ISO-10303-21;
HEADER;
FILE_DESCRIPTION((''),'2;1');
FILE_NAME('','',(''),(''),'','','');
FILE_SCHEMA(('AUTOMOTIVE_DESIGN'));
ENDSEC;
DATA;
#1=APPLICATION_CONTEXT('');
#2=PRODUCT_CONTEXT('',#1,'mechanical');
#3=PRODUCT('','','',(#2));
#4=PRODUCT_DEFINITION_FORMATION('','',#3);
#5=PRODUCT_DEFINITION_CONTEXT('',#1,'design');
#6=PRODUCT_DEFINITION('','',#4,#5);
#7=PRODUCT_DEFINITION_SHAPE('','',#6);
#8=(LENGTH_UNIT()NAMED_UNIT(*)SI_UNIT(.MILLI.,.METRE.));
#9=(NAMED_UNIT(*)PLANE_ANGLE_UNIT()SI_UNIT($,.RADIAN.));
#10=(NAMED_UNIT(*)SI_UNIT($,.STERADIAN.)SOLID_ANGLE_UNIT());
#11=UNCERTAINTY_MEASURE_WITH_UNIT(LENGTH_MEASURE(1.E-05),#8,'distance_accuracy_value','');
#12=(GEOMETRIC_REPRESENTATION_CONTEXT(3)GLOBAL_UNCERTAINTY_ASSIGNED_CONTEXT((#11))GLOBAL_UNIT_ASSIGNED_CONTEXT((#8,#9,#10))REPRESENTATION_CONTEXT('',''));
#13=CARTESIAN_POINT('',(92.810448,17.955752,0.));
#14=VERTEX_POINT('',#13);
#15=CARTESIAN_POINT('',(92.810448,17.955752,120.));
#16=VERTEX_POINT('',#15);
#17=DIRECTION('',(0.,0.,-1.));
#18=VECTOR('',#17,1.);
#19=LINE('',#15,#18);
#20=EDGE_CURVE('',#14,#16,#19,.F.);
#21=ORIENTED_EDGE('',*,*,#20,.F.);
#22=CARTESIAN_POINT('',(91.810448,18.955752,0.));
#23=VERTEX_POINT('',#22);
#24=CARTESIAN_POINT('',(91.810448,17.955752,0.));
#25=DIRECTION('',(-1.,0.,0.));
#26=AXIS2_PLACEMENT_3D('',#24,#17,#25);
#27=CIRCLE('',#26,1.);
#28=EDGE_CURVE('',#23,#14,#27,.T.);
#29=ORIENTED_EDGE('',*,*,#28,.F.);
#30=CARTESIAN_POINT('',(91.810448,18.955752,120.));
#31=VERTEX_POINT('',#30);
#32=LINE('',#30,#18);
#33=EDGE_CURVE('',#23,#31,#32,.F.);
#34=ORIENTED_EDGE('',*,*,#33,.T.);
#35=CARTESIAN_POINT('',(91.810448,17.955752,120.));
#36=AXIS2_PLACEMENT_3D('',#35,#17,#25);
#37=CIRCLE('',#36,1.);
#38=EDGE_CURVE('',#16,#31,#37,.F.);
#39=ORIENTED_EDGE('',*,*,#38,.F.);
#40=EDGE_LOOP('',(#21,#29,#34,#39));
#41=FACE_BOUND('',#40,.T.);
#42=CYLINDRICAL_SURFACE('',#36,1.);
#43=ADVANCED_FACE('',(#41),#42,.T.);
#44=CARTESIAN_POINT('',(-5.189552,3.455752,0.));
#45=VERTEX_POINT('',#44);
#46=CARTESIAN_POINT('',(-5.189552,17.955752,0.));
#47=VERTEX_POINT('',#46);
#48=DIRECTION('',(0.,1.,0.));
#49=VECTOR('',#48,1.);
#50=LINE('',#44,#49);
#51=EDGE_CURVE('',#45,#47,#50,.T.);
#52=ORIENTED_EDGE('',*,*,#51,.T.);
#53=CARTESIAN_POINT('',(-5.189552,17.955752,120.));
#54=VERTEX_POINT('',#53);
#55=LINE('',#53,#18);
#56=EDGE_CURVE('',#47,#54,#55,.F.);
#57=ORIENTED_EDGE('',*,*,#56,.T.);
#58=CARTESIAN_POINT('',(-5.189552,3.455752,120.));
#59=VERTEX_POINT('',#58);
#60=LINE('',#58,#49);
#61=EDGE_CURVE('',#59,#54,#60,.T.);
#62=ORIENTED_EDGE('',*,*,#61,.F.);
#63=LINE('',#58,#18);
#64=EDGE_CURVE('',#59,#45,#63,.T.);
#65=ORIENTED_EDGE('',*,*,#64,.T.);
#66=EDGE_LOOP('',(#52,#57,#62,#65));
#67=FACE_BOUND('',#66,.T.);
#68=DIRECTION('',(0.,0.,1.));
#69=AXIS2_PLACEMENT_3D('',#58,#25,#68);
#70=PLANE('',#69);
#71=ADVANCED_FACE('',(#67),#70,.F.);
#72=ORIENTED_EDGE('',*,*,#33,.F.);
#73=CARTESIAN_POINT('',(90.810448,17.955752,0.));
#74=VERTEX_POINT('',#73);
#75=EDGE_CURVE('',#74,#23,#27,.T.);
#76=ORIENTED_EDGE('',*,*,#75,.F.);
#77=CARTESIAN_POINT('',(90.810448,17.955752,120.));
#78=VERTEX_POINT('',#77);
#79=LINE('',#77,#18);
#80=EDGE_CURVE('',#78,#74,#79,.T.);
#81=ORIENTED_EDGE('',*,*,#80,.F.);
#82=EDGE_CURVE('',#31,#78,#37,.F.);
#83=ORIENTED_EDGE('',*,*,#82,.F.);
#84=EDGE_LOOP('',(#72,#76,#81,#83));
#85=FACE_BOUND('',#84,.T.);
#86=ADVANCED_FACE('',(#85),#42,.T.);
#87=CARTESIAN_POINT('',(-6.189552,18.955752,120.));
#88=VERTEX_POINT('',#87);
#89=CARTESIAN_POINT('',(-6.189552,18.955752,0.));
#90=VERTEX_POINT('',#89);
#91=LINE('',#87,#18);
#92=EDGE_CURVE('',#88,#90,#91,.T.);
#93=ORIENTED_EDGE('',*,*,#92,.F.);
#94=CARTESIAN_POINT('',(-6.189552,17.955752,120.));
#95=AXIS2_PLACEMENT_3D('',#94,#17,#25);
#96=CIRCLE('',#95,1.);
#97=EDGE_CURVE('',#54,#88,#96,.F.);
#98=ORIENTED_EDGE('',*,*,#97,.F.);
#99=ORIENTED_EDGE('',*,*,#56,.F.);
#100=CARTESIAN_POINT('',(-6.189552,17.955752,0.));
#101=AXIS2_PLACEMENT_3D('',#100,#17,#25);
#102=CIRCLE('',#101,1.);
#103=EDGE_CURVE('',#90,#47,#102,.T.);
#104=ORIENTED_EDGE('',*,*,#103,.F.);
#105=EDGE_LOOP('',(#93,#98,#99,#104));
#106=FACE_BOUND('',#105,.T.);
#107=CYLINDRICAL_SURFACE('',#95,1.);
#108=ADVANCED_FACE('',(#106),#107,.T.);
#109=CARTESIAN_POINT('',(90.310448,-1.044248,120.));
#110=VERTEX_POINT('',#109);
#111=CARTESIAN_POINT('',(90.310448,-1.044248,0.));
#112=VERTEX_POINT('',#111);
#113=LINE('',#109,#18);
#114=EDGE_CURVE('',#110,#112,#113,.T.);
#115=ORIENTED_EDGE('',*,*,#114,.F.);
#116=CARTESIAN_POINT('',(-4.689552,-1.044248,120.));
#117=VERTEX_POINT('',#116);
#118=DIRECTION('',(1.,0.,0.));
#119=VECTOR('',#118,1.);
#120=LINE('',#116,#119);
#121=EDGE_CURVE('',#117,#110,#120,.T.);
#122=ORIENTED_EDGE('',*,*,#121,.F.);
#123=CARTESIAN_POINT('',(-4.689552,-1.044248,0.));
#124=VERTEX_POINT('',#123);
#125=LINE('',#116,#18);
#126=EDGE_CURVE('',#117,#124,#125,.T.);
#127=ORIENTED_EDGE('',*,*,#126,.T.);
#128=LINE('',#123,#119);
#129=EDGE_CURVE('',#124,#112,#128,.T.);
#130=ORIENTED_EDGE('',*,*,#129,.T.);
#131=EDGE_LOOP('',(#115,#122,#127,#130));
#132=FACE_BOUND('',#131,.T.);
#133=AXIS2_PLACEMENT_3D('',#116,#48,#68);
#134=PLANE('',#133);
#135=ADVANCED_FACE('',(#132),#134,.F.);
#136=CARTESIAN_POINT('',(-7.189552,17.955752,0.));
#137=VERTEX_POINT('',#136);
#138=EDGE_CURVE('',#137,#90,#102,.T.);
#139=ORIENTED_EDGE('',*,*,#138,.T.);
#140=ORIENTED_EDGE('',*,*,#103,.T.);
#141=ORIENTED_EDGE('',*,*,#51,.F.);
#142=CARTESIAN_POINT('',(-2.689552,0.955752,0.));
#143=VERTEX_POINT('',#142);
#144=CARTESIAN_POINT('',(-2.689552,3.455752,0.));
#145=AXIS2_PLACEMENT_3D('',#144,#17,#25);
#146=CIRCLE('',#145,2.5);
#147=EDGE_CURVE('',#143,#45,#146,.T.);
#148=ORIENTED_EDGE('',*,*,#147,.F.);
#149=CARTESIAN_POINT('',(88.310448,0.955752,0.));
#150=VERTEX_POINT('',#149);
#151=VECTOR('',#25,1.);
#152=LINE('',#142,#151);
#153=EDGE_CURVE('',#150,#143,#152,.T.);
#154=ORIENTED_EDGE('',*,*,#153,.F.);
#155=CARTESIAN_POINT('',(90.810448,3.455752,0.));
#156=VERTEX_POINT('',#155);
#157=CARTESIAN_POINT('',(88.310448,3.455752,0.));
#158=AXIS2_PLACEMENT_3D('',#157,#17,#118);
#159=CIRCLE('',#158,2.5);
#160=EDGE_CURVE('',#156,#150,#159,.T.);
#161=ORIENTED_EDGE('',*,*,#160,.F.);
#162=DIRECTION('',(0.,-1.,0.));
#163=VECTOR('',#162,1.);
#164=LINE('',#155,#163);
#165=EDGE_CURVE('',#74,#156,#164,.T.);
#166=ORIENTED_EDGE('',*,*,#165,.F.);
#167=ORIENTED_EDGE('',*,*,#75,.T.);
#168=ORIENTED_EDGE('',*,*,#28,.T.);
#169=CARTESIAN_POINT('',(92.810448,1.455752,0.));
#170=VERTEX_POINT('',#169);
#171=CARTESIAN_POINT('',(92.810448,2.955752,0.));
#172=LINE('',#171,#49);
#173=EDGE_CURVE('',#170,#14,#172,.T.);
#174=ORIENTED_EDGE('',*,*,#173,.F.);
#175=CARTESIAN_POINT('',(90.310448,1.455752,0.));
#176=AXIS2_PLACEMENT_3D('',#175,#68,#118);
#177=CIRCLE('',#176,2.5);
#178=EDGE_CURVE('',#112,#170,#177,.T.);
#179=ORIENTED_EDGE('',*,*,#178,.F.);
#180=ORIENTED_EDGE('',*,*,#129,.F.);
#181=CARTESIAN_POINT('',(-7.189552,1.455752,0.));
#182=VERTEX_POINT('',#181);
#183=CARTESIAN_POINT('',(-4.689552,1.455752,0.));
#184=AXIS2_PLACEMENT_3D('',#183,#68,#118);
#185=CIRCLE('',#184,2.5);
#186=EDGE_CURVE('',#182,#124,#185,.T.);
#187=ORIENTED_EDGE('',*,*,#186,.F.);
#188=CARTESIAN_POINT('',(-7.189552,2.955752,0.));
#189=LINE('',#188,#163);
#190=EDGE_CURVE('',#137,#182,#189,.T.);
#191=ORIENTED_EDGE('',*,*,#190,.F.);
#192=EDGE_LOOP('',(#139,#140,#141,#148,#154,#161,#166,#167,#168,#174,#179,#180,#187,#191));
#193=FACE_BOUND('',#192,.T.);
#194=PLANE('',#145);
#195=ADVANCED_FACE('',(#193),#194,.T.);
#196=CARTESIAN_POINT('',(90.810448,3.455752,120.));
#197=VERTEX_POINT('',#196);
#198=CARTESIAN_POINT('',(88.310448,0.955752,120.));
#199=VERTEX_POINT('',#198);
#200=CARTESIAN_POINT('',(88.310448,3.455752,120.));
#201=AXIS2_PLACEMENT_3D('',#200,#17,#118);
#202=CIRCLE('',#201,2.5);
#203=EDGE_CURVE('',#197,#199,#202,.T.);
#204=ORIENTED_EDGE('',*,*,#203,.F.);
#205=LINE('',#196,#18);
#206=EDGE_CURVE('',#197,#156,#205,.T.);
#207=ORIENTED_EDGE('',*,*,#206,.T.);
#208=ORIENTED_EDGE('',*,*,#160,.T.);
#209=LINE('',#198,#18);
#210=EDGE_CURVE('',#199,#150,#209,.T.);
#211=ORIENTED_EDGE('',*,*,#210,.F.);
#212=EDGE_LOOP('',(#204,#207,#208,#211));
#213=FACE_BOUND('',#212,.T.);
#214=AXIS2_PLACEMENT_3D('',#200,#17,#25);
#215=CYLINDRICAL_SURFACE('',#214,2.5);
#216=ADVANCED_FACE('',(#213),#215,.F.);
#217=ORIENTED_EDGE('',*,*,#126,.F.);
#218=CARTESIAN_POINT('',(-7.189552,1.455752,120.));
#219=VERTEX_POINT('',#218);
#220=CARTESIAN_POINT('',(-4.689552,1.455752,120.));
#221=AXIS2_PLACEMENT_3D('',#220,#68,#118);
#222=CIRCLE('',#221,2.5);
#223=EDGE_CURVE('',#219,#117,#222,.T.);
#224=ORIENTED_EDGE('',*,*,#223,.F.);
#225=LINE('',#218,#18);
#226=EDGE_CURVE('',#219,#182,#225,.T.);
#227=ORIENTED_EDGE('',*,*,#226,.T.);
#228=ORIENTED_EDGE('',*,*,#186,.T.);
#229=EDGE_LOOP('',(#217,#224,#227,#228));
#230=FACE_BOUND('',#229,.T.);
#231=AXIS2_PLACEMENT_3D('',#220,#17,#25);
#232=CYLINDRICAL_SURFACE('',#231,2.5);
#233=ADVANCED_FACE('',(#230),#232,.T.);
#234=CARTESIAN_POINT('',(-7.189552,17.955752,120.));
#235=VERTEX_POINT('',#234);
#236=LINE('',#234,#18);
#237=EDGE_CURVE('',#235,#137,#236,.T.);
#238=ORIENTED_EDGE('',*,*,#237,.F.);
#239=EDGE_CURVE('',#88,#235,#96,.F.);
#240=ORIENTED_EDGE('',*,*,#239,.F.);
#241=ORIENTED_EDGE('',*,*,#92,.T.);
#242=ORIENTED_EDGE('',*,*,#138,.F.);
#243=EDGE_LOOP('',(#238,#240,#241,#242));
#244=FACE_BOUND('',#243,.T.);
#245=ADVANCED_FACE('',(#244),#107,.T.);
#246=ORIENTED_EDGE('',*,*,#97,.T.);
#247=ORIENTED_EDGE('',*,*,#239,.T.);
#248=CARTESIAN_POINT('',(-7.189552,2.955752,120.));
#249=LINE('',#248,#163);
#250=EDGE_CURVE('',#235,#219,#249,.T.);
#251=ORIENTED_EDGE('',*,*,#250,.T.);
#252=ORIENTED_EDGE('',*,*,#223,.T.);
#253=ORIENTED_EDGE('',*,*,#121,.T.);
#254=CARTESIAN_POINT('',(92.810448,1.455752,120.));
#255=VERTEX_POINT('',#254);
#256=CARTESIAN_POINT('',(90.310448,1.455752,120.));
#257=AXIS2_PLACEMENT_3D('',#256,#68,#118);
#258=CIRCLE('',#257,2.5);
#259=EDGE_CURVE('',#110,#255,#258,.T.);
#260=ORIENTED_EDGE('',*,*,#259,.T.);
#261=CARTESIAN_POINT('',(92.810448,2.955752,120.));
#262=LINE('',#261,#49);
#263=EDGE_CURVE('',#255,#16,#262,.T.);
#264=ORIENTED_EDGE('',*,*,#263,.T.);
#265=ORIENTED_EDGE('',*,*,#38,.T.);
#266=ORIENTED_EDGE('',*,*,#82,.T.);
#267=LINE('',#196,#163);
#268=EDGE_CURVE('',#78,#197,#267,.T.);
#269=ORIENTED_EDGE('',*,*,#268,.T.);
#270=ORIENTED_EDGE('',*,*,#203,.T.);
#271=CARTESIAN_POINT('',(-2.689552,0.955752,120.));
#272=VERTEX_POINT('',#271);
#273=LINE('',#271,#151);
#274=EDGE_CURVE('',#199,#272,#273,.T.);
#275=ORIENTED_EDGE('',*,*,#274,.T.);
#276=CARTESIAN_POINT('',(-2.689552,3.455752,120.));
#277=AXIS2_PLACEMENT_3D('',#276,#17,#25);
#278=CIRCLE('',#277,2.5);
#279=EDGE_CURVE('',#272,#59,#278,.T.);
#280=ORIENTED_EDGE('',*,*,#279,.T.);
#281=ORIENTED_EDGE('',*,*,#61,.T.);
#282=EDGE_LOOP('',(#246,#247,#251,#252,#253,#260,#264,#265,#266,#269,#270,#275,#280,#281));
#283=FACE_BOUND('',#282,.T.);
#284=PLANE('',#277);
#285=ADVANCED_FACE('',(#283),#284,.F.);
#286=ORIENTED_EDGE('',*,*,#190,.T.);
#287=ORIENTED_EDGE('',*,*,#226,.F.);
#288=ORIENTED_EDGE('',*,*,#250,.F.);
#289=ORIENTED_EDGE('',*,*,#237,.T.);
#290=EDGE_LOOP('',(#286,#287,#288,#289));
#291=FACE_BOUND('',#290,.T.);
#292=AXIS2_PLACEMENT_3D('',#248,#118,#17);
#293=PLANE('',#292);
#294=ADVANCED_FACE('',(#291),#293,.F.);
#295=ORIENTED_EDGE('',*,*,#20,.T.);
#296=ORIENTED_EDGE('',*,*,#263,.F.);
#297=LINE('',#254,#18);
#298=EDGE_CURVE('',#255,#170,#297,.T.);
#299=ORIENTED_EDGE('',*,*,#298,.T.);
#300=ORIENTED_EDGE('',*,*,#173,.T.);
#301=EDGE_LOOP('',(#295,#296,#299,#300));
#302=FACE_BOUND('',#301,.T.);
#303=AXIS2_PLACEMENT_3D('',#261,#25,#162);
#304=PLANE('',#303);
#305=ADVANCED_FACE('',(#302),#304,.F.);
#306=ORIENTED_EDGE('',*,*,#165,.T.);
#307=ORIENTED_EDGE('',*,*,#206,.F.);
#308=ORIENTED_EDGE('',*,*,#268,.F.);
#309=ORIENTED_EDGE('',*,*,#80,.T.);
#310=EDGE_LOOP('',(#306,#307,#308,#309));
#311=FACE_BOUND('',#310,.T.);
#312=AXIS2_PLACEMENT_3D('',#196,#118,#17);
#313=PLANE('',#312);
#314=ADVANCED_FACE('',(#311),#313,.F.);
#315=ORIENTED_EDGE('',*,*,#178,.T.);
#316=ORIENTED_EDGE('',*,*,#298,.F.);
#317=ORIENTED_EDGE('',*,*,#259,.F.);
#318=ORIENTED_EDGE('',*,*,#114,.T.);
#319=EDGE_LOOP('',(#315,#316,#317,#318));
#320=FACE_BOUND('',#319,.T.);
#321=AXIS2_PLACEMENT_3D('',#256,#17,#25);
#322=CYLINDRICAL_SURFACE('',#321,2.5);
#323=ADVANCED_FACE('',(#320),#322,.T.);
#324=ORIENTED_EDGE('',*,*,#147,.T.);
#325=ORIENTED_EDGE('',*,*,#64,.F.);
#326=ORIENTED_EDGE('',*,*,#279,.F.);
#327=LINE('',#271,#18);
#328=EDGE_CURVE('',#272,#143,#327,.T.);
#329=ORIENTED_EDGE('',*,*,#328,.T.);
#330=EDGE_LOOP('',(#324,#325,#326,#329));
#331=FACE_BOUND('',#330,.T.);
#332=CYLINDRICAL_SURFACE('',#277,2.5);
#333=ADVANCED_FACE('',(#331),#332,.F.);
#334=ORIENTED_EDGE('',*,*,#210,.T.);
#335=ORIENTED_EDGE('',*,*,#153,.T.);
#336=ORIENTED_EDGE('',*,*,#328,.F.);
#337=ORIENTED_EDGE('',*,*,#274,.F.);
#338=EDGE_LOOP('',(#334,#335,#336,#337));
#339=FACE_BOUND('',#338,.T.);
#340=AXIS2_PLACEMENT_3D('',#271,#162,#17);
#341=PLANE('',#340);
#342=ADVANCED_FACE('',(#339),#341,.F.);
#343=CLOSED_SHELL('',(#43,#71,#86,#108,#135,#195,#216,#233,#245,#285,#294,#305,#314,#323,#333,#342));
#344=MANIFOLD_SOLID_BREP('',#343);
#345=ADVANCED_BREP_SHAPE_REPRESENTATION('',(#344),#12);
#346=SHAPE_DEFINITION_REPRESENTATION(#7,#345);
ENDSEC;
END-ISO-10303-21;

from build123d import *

# Parameters (mm, degrees)
BOSS_EXTRUDE3_DEPTH = 120
FILLET4_R           = 1


with BuildPart() as part:
    # Sketch5 → Boss-Extrude3 (new body)
    with BuildSketch(Plane.XY):
        with BuildLine():
            Line((-2.689552127, 0.955752212), (88.310447873, 0.955752212))
            ThreePointArc((88.310447873, 0.955752212), (90.078214826, 1.687985259), (90.810447873, 3.455752212))
            Line((90.810447873, 3.455752212), (90.810447873, 18.955752212))
            Line((90.810447873, 18.955752212), (92.810447873, 18.955752212))
            Line((92.810447873, 18.955752212), (92.810447873, 2.955752212))
            Line((92.810447873, 2.955752212), (92.810447873, 1.455752212))
            ThreePointArc((92.810447873, 1.455752212), (92.078214826, -0.312014741), (90.310447873, -1.044247788))
            Line((90.310447873, -1.044247788), (-4.689552127, -1.044247788))
            ThreePointArc((-4.689552127, -1.044247788), (-6.45731908, -0.312014741), (-7.189552127, 1.455752212))
            Line((-7.189552127, 1.455752212), (-7.189552127, 2.955752212))
            Line((-7.189552127, 2.955752212), (-7.189552127, 18.955752212))
            Line((-7.189552127, 18.955752212), (-5.189552127, 18.955752212))
            Line((-5.189552127, 18.955752212), (-5.189552127, 3.455752212))
            ThreePointArc((-5.189552127, 3.455752212), (-4.45731908, 1.687985259), (-2.689552127, 0.955752212))
        make_face()
    extrude(amount=BOSS_EXTRUDE3_DEPTH)

    # Fillet4
    fillet4_edges = [part.edges().sort_by_distance(p)[0] for p in [
        (92.810447873, 18.955752212, 60),
        (90.810447873, 18.955752212, 60),
        (-7.189552127, 18.955752212, 60),
        (-5.189552127, 18.955752212, 60),
    ]]
    fillet(fillet4_edges, radius=FILLET4_R - 0.0001)  # a hair under: the kernel refuses the full size


solid = part.part
